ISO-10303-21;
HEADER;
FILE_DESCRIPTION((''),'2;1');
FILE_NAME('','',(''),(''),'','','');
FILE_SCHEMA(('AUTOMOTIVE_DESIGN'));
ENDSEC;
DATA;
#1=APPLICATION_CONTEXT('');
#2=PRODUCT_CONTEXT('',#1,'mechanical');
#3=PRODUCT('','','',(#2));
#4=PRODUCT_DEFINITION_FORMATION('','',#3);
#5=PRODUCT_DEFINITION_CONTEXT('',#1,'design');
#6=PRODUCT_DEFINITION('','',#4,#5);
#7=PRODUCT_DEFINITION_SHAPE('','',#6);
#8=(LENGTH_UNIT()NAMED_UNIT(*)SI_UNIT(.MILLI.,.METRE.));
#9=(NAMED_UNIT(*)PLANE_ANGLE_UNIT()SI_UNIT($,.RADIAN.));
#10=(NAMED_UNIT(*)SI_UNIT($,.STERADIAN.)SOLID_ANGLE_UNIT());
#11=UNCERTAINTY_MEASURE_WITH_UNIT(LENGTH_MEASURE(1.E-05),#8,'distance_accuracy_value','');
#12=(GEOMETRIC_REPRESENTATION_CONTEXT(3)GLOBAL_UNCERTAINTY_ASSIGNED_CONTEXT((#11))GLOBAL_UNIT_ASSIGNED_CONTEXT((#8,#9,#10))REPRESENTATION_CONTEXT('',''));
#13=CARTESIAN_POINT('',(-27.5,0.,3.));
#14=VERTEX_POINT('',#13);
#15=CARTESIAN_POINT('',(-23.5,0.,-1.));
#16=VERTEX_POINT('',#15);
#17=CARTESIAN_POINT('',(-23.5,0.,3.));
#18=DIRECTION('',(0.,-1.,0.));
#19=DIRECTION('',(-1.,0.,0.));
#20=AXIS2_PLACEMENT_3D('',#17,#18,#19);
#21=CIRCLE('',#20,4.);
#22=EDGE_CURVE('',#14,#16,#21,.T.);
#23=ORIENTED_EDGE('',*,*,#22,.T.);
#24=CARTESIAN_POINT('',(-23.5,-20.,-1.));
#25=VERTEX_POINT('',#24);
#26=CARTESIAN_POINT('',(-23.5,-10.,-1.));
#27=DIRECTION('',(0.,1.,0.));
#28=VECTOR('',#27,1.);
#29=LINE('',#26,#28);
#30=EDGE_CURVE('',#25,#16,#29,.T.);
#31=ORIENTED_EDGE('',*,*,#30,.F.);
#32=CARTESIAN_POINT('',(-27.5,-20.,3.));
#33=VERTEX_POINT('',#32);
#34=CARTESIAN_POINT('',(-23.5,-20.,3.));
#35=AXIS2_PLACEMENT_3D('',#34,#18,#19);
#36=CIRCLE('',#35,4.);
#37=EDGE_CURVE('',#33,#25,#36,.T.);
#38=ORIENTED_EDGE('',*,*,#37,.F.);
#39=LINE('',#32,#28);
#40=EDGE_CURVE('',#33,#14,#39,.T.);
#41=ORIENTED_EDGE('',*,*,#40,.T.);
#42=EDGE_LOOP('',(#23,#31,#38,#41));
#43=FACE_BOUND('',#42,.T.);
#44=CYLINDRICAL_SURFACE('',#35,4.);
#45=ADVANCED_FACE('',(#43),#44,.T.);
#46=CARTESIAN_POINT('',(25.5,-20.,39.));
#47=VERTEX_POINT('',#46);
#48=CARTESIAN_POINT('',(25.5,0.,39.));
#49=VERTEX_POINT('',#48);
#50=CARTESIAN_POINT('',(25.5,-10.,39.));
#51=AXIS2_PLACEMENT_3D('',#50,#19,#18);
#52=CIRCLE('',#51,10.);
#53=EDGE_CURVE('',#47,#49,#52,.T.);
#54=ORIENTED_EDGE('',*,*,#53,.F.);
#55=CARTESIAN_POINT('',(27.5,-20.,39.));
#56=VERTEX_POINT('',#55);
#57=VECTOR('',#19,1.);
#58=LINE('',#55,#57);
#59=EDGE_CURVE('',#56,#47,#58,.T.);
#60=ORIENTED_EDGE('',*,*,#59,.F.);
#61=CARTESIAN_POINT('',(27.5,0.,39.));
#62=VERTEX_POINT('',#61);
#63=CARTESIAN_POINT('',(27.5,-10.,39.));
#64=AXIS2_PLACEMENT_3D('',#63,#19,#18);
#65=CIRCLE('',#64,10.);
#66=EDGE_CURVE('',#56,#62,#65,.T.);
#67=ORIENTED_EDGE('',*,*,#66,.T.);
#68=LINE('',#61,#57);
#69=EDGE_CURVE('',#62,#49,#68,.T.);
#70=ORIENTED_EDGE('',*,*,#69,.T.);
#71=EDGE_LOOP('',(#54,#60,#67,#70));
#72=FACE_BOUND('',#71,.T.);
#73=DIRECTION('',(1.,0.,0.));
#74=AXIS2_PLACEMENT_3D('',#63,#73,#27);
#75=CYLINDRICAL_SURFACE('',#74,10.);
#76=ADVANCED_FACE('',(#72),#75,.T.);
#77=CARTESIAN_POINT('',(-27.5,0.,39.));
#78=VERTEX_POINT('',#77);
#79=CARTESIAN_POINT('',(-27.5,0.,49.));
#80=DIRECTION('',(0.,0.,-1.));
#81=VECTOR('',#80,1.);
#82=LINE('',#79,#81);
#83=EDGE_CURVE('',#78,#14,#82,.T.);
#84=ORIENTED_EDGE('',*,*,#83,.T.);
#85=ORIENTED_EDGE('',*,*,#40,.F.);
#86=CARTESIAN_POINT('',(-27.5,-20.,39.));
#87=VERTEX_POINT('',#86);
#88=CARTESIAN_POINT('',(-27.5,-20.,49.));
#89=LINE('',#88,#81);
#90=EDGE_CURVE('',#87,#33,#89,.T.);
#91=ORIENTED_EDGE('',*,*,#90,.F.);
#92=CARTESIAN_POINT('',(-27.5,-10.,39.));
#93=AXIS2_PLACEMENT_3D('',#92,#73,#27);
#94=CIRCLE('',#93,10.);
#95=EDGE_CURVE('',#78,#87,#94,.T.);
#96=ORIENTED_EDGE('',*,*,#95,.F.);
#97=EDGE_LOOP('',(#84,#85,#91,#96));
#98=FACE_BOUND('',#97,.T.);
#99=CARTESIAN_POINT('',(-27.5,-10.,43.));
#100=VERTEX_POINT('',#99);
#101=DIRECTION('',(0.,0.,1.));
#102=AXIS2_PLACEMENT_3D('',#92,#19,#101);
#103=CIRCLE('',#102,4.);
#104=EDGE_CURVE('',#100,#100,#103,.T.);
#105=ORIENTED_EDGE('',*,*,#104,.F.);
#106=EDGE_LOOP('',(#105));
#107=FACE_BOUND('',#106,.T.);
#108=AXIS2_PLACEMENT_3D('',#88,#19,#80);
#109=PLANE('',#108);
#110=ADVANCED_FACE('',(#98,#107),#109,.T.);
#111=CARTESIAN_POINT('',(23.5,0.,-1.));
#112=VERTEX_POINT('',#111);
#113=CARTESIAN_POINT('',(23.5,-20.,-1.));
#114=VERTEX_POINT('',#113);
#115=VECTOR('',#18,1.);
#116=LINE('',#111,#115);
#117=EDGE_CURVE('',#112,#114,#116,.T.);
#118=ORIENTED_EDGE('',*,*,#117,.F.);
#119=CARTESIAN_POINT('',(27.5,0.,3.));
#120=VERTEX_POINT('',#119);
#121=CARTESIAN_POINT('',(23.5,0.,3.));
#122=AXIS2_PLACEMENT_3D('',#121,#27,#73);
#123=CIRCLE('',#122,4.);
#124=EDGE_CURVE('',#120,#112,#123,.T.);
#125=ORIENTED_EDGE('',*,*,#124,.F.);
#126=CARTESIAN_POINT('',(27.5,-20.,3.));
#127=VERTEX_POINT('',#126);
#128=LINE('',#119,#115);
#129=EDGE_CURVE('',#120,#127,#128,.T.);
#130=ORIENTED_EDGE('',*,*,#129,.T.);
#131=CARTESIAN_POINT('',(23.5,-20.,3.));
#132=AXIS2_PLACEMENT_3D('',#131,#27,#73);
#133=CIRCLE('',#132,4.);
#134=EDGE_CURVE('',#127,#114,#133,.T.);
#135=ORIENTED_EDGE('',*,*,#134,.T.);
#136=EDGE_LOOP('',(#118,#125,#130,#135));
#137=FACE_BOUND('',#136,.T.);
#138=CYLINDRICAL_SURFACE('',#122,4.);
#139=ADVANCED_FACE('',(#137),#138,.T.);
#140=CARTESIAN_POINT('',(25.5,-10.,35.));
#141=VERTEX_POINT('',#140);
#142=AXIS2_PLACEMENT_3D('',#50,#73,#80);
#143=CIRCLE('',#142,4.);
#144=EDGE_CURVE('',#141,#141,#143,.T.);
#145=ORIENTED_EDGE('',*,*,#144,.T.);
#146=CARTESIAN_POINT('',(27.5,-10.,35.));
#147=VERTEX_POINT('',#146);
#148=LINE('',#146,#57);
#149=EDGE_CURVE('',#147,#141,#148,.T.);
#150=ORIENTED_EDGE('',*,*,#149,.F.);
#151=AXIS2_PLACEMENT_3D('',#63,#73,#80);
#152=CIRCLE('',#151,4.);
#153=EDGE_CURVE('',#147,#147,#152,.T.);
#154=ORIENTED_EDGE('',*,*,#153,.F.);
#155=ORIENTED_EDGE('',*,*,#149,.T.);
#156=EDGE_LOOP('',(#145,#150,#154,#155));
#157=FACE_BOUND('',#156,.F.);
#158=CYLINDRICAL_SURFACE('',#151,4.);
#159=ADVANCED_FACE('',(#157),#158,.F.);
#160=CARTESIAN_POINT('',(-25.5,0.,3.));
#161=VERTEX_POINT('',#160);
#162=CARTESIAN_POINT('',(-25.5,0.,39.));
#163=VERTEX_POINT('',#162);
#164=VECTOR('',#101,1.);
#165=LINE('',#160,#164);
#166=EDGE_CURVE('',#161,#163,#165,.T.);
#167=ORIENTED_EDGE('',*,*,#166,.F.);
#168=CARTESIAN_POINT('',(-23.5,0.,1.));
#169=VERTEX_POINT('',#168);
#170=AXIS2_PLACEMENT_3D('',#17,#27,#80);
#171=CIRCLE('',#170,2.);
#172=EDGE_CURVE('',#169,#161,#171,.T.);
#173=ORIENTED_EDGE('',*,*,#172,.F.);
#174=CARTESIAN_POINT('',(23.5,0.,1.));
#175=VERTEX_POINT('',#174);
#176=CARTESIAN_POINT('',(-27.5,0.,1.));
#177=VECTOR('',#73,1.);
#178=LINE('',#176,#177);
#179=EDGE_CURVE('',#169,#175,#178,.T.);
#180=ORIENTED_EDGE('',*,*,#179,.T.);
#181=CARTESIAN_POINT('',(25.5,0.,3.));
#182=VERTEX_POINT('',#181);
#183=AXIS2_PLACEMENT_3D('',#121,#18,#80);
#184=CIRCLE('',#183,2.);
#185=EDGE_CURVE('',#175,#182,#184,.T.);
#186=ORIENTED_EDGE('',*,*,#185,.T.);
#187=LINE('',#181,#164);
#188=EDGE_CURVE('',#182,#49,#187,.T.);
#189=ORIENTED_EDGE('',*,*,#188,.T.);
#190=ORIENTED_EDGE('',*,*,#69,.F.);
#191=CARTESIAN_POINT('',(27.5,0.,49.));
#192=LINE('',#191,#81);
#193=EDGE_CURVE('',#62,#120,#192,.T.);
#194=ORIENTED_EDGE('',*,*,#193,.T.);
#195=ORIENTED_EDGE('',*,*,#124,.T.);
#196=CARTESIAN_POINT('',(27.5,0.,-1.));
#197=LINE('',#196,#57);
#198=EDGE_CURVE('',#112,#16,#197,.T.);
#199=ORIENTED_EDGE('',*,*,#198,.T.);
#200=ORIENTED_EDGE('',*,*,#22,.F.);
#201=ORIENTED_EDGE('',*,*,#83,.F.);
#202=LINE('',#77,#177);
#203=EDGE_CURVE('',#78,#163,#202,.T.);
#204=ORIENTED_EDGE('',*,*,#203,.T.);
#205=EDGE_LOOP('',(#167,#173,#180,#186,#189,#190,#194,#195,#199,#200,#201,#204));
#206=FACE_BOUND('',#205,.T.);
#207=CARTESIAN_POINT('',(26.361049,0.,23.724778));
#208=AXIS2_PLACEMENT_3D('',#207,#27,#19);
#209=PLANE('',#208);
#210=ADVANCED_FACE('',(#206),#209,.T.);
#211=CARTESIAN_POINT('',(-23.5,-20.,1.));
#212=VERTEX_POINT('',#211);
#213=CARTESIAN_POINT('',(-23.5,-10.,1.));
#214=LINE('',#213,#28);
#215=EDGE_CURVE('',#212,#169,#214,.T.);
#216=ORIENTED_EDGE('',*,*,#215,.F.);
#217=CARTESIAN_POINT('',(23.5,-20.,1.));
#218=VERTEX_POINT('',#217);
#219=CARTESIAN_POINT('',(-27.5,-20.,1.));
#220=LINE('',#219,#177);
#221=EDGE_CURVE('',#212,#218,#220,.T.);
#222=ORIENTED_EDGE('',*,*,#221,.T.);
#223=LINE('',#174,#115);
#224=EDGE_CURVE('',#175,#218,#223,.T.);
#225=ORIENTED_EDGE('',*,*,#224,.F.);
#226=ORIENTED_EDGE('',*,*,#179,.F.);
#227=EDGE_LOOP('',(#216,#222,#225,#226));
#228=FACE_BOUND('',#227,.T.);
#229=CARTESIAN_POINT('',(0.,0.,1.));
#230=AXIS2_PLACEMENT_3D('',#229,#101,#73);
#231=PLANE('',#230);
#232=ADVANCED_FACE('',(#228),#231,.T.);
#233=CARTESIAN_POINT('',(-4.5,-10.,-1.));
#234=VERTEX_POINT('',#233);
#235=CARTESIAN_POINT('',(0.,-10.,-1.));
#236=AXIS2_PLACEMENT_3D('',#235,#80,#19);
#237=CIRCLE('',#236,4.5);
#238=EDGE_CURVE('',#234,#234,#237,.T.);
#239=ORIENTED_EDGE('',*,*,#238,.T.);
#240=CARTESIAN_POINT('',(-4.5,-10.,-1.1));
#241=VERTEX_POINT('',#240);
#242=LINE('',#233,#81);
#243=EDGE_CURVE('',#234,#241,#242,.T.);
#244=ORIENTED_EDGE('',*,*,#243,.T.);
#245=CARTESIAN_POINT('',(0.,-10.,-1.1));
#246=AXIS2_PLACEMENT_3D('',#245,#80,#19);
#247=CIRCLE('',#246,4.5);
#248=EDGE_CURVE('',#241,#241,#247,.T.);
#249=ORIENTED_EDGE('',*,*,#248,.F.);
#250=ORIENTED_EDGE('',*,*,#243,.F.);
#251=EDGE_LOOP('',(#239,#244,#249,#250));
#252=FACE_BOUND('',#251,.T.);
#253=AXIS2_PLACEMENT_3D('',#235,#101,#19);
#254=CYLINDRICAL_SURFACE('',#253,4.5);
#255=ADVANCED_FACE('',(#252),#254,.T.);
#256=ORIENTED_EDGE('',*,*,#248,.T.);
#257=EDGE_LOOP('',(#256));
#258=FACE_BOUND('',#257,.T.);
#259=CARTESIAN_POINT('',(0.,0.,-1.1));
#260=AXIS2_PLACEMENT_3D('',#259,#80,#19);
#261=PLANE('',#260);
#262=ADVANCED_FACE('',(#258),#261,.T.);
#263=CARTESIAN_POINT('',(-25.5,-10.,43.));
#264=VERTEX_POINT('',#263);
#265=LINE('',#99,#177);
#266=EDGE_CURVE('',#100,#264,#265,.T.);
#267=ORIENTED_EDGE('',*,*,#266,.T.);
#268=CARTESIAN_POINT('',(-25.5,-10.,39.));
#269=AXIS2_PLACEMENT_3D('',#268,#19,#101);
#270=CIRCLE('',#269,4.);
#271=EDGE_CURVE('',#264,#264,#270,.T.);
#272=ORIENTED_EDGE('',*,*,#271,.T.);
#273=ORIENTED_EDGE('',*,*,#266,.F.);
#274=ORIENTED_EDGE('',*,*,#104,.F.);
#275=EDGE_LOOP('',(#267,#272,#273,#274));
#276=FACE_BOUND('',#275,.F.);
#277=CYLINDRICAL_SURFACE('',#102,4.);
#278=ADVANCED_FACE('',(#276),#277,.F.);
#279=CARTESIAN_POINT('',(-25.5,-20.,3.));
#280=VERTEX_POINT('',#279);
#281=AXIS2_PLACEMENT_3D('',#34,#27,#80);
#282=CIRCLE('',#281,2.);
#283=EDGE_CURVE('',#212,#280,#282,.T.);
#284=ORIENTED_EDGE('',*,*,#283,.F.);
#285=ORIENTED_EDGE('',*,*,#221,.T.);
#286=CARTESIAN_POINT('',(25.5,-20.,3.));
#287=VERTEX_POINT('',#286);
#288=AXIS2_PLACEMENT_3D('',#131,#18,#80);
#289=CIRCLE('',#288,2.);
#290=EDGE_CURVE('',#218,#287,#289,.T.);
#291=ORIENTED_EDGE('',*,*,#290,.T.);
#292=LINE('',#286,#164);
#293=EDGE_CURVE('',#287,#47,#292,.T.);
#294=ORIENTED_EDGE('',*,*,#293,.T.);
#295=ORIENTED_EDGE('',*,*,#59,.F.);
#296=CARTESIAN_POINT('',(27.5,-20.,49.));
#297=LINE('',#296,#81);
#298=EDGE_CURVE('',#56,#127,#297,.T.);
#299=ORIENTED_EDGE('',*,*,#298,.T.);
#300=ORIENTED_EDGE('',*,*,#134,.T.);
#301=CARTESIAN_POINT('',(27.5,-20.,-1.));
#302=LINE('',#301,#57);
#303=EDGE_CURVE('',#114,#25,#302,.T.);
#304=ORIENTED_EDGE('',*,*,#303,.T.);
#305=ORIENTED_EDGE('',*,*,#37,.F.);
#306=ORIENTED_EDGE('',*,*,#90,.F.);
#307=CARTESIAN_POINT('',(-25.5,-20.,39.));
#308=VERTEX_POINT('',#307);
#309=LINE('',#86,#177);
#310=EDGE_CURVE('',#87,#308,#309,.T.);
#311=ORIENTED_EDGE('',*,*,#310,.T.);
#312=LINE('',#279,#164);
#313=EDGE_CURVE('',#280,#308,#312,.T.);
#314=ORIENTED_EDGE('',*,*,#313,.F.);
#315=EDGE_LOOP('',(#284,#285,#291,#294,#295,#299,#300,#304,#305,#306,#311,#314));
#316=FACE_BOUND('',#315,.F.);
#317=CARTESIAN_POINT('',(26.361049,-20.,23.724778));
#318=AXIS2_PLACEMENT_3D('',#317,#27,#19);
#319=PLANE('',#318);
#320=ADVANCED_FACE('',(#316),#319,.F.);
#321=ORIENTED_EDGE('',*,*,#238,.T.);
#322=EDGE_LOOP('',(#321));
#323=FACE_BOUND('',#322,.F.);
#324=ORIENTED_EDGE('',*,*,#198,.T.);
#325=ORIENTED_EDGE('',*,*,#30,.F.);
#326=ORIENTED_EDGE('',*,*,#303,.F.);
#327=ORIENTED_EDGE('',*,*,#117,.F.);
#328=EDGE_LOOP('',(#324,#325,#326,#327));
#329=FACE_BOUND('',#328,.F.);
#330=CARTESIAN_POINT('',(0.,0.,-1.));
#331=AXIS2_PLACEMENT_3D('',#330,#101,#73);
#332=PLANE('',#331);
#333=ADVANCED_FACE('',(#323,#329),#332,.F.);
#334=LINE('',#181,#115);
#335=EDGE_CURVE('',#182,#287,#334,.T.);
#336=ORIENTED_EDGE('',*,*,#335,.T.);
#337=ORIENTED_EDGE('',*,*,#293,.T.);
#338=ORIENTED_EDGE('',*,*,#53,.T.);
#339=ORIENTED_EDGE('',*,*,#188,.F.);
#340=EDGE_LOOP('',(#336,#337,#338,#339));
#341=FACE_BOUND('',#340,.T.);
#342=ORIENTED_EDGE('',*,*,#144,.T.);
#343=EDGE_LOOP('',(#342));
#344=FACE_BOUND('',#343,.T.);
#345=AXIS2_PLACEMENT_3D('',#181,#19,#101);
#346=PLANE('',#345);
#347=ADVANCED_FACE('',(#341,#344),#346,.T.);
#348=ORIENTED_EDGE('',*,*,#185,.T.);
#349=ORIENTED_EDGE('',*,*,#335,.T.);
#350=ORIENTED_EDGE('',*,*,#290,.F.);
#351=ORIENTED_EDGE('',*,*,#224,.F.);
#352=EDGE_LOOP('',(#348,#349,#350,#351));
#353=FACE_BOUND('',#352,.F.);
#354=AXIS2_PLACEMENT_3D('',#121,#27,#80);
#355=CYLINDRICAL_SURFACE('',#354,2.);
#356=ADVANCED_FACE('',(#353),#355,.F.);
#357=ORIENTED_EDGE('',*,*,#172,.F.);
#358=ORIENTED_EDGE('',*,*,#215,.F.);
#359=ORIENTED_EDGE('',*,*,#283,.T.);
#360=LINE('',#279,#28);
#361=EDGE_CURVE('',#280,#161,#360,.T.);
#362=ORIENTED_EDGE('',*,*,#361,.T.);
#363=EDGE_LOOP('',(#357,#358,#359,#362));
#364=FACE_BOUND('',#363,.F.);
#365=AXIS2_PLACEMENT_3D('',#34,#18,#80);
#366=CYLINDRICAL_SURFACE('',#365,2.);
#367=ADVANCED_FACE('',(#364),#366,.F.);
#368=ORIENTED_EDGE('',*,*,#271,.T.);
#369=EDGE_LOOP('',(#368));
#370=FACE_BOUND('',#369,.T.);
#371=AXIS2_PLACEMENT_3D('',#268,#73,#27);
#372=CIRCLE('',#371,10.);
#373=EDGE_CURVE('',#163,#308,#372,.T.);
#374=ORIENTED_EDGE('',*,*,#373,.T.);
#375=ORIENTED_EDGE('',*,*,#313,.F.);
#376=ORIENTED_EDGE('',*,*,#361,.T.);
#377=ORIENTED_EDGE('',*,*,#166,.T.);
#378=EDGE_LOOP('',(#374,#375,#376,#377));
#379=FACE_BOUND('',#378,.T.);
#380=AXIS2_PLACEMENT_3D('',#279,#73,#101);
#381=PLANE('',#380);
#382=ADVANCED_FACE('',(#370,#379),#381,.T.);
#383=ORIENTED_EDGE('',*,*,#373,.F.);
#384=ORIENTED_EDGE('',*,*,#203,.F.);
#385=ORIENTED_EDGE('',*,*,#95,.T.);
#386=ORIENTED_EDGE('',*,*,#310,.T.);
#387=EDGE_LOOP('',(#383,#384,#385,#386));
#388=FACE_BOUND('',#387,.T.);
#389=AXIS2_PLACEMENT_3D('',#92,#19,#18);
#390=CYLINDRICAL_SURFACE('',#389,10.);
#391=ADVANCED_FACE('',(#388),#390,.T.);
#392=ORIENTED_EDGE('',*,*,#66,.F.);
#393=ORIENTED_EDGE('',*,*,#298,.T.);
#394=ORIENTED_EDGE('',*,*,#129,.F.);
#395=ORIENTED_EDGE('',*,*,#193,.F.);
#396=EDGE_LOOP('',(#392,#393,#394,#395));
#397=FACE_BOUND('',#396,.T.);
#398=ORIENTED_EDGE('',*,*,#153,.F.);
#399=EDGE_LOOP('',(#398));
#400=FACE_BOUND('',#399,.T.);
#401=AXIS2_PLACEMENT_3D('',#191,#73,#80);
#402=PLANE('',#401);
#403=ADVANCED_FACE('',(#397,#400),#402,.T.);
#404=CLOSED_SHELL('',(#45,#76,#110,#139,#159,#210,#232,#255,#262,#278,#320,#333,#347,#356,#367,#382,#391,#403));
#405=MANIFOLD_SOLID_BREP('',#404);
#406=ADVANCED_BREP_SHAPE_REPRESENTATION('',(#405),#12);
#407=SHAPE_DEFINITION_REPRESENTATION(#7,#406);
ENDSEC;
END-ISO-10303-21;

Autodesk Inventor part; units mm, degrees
ref_plane "YZ Plane" through (0, 0, 0) normal (1, 0, 0) x (0, 1, 0)
ref_plane "XZ Plane" through (0, 0, 0) normal (0, 1, 0) x (-1, 0, 0)
ref_plane "XY Plane" through (0, 0, 0) normal (0, 0, 1) x (1, 0, 0)
sketch "Sketch1" plane through (0, 0, 0) normal (0, 0, 1) x (1, 0, 0)
  line L0 (0, 0) -> (27.5, 0)
  line L1 (27.5, -20) -> (0, -20)
  line L2 (0, 0) -> (0, -20)
  line L3 (0, 0) -> (-27.5, 0)
  line L4 (-27.5, -20) -> (0, -20)
  line L5 (27.5, 0) -> (27.5, -20)
  line L6 (-27.5, 0) -> (-27.5, -20)
  dimension "d0" = 27.5
  dimension "d6" = 20
extrude "Extrusion1" add sketch "Sketch1" along normal mid plane 2
sketch "Sketch2" plane through (-25.5, -20, -1) normal (-1, 0, 0) x (0, -1, 0)
  line L0 (-20, 0) -> (0, 0)
  line L1 (0, 0) -> (0, 50)
  line L2 (0, 50) -> (-20, 50)
  line L3 (-20, 50) -> (-20, 0)
edge flange "Flange1" height 50 angle 90 thickness 2 bend radius 2 thickness toward (-1, 0, 0) relief tear relief width 2 relief depth 1 edges at (-27.5, -10, 1) wall of the first edge with corners at (-25.5, 0, -1) (-25.5, -20, -1) (-25.5, -20, 49) (-25.5, 0, 49)
bend "Bend1"
corner "Corner1"
sketch "Sketch3" plane through (25.5, 0, -1) normal (1, 0, 0) x (0, 1, 0)
  line L0 (-20, 0) -> (0, 0)
  line L1 (0, 0) -> (0, 50)
  line L2 (0, 50) -> (-20, 50)
  line L3 (-20, 50) -> (-20, 0)
edge flange "Flange2" height 50 angle 90 thickness 2 bend radius 2 thickness toward (1, 0, 0) relief tear relief width 2 relief depth 1 edges at (27.5, -10, 1) wall of the first edge with corners at (25.5, -20, -1) (25.5, 0, -1) (25.5, 0, 49) (25.5, -20, 49)
bend "Bend2"
corner "Corner2"
sketch "Sketch5" plane through (27.5, -20, 49) normal (1, 0, 0) x (0, 0, -1)
  line L0 (46, 0) -> (0, 0) projected
  line L1 (0, 0) -> (0, 20) projected
  line L2 (0, 20) -> (0, 0) projected
  line L3 (0, 0) -> (0, 20)
  line L4 (0, 20) -> (10, 20)
  line L5 (0, 0) -> (10, 0)
  line L6 (0, 0) -> (46, 0) projected
  arc A0 (10, 20) -> (10, 0) centre (10, 10) ccw
  line L7 (0, 20) -> (46, 20) projected
  circle A1 centre (10, 10) radius 4
  point P0 (49, 20)
  point P1 (0, 10)
  dimension "d38" = 10
  dimension "d39" = 10
  dimension "d40" = 10
  dimension "d46" = 8
extrude "Cut1" cut sketch "Sketch5" against normal blind 2
sketch "Sketch6" plane through (-27.5, -20, 49) normal (-1, 0, 0) x (0, 0, 1)
  line L0 (0, 20) -> (0, 0) projected
  line L1 (-10, 0) -> (0, 0)
  line L2 (0, 0) -> (0, 20)
  line L3 (0, 20) -> (-10, 20)
  line L4 (-46, 20) -> (0, 20) projected
  arc A0 (-10, 0) -> (-10, 20) centre (-10, 10) ccw
  circle A1 centre (-10, 10) radius 4
  point P0 (-49, 20)
  point P1 (0, 10)
  dimension "d43" = 10
  dimension "d47" = 8
extrude "Cut2" cut sketch "Sketch6" against normal blind 2
sketch "Sketch7" plane through (0, 0, -1) normal (0, 0, -1) x (-1, 0, 0)
  line L0 (23.5, 0) -> (-23.5, 0) projected
  line L1 (-23.5, -20) -> (23.5, -20) projected
  circle A0 centre (0, -10) radius 4.5
  line L2 (23.5, -20) -> (23.5, 0) projected
  line L3 (-23.5, 0) -> (-23.5, -20) projected
  point P0 (0, 0)
  dimension "d48" = 10
  dimension "d49" = 9
  dimension "d53" = 23.5
extrude "Extrusion2" add sketch "Sketch7" along normal blind 0.1 contours A0
equation "\"d41\" = Thickness"
equation "\"d44\" = Thickness"
equation "\"d7\" = Thickness"
equation "\"d8\" = BendReliefWidth"
equation "\"d9\" = BendReliefDepth"
equation "\"d10\" = MinimumRemnant"
equation "\"d11\" = TransitionRadius"
equation "\"d14\" = BendRadius"
equation "\"d15\" = CornerReliefSize"
equation "\"d16\" = GapSize"
equation "\"d17\" = JacobiRadiusSize"
equation "\"d18\" = BendReliefWidth"
equation "\"d19\" = BendReliefDepth"
equation "\"d20\" = MinimumRemnant"
equation "\"d21\" = TransitionRadius"
equation "\"d24\" = BendRadius"
equation "\"d25\" = CornerReliefSize"
equation "\"d26\" = GapSize"
equation "\"d27\" = JacobiRadiusSize"
equation "\"BendRadius\" = Thickness"
equation "\"BendReliefWidth\" = Thickness"
equation "\"BendReliefDepth\" = 0.5 * Thickness"
equation "\"CornerReliefSize\" = 4 * Thickness"
equation "\"MinimumRemnant\" = 2 * Thickness"
equation "\"TransitionRadius\" = BendRadius"
equation "\"JacobiRadiusSize\" = BendRadius"
equation "\"GapSize\" = Thickness"
equation "\"Thickness\" = 2"
properties part number "SHEET_METAL1"
